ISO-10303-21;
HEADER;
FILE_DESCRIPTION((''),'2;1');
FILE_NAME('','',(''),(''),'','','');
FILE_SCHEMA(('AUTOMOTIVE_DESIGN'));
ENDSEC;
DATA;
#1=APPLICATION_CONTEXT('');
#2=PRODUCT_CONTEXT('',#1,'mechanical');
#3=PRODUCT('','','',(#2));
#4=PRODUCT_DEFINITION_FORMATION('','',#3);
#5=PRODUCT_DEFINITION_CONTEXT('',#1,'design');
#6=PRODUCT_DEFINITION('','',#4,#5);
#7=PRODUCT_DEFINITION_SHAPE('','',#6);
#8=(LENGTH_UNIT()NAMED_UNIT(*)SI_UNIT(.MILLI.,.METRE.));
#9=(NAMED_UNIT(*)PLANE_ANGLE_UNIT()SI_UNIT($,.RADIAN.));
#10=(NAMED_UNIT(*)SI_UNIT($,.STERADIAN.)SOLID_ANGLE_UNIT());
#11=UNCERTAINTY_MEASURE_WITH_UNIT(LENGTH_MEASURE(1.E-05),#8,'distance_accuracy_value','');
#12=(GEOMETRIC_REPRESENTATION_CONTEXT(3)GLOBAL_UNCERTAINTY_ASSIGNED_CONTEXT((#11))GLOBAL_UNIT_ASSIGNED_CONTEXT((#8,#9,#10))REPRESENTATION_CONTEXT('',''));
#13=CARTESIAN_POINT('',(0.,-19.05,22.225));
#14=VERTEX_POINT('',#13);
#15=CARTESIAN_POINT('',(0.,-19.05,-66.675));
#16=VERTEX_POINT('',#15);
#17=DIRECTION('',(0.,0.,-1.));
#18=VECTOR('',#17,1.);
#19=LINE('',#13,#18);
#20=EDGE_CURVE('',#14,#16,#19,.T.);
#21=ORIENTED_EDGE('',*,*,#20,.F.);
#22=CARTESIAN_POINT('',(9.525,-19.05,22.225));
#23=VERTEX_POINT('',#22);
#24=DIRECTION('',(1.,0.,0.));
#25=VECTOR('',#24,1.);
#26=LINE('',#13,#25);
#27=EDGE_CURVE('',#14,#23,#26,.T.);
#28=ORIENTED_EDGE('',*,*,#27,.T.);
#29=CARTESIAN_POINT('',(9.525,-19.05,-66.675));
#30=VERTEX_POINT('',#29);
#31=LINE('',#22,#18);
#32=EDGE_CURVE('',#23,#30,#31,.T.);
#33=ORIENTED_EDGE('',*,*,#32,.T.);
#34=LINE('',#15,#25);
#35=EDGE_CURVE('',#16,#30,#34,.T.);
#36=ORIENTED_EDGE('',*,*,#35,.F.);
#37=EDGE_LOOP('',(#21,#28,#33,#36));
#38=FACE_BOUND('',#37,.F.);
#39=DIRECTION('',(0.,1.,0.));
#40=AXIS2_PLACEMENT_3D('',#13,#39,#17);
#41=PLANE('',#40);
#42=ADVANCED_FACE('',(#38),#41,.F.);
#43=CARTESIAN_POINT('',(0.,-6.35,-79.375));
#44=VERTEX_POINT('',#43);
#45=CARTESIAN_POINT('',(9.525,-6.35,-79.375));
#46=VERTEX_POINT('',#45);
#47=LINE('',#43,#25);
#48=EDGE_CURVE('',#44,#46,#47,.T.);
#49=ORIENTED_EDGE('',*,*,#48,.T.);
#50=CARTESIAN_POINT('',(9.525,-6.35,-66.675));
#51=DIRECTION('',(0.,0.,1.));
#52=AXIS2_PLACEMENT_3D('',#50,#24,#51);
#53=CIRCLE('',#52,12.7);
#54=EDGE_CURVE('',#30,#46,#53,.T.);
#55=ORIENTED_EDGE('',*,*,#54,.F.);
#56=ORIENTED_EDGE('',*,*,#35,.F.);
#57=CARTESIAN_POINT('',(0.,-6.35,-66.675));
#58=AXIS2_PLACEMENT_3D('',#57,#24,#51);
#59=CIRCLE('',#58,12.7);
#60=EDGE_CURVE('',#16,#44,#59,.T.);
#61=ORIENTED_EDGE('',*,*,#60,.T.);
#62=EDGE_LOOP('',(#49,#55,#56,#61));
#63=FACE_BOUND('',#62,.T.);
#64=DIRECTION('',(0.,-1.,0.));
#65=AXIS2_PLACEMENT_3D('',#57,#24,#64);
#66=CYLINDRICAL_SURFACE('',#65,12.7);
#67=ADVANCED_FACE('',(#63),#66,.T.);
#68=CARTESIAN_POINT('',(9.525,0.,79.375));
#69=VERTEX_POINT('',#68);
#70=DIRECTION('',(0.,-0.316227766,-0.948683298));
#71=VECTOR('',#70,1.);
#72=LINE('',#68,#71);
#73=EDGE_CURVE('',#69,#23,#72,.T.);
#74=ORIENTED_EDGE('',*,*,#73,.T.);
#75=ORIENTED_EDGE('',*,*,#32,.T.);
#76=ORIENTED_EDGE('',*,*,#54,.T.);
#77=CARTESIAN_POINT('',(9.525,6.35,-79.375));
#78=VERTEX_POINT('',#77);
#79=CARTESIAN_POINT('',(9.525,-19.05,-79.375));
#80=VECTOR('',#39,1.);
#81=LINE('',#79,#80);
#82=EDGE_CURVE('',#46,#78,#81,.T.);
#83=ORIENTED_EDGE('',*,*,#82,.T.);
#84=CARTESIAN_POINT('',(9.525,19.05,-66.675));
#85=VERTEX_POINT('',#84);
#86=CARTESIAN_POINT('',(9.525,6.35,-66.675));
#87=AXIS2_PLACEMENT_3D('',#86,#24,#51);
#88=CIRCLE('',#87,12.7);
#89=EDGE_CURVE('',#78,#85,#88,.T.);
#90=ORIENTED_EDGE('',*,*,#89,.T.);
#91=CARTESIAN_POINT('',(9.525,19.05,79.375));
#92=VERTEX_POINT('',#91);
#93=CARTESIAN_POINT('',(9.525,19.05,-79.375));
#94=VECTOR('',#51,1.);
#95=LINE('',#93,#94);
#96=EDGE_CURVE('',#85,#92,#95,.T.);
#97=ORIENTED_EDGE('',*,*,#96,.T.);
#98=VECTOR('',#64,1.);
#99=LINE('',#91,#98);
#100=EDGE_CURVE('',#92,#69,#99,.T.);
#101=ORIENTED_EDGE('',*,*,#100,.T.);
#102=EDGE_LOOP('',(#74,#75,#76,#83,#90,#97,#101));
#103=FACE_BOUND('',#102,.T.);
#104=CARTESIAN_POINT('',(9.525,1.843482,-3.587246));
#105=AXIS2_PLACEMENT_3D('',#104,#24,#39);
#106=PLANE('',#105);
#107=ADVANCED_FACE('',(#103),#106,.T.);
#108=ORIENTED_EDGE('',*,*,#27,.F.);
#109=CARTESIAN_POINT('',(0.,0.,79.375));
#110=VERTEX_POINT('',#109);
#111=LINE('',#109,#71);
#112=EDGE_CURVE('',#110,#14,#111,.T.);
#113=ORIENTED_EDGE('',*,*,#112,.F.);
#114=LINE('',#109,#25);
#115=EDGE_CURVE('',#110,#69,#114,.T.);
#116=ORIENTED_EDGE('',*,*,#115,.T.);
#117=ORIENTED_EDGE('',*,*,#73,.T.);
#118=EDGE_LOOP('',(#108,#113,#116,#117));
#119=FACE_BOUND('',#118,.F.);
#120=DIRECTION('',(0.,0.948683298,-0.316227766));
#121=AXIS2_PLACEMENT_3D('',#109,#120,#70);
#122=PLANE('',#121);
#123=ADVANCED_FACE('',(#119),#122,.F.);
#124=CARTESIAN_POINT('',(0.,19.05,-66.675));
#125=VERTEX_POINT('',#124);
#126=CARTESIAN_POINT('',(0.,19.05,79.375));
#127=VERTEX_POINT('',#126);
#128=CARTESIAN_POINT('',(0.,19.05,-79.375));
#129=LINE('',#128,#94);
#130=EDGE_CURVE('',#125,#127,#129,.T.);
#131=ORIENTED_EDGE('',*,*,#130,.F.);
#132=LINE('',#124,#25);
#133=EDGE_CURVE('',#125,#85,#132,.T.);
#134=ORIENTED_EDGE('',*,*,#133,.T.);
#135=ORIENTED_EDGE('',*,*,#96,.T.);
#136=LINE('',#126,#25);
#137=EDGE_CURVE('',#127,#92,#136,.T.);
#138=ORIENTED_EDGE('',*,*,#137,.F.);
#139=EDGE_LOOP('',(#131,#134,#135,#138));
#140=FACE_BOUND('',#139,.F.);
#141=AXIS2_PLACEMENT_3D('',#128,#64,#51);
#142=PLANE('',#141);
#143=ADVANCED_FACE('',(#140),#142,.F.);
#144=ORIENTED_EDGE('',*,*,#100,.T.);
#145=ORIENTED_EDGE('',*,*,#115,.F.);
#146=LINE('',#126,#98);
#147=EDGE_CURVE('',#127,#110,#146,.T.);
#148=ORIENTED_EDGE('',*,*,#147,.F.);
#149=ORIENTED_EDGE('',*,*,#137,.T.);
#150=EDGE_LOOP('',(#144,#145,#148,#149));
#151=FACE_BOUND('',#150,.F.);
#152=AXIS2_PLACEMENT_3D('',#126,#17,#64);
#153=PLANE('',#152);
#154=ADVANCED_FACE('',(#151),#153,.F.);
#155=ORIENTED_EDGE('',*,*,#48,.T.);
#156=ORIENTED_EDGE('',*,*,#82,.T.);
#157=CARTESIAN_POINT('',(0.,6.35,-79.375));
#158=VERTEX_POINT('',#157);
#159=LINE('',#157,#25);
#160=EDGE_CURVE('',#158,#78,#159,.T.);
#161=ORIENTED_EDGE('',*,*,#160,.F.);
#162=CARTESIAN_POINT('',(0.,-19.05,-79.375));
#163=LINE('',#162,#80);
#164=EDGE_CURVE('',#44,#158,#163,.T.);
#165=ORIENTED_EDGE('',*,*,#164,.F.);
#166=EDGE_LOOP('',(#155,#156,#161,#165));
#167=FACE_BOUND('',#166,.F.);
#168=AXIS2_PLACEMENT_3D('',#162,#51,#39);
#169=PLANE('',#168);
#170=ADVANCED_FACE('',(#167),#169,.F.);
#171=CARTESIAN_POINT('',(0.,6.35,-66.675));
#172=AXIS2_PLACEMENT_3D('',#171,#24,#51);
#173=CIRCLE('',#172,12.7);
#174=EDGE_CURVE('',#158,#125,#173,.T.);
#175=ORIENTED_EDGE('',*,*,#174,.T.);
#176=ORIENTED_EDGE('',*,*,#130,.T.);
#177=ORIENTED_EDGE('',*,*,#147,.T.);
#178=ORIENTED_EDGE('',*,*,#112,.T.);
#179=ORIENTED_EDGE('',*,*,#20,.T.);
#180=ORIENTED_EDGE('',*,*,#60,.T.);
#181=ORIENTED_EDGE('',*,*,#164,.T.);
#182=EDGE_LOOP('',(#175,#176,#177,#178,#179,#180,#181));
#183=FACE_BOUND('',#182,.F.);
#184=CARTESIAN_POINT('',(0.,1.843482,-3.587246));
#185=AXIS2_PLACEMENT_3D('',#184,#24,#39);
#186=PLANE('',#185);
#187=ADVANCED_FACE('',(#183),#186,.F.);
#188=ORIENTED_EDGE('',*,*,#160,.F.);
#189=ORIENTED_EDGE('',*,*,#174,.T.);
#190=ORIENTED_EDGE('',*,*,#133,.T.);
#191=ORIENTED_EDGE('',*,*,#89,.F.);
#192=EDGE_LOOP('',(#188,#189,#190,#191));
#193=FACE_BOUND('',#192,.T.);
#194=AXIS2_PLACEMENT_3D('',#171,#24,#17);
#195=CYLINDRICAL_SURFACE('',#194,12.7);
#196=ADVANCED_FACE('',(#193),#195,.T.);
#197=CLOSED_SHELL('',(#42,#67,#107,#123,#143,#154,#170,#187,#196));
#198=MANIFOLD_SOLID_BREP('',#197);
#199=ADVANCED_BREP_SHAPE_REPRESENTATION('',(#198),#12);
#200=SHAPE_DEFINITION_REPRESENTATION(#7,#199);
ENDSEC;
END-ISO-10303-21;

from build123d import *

# Parameters (mm, degrees)
F1_DEPTH = 9.525
F2_R     = 12.7


# Not quite as in the source:
# - a feature names something its author has since deleted; it is built from what else it names


with BuildPart() as f1:
    # F0 (on Right) → F1 (new body)
    with BuildSketch(Plane.YZ):
        Polygon((-19.05, 22.225), (-19.05, -79.375), (19.05, -79.375), (19.05, 79.375), (0, 79.375), align=None)
    extrude(amount=F1_DEPTH)

    # F2
    f2_edges = [f1.edges().sort_by_distance(p)[0] for p in [
        (4.7625, -19.05, -79.375),
        (4.7625, 19.05, -79.375),
    ]]
    fillet(f2_edges, radius=F2_R)


solid = f1.part
